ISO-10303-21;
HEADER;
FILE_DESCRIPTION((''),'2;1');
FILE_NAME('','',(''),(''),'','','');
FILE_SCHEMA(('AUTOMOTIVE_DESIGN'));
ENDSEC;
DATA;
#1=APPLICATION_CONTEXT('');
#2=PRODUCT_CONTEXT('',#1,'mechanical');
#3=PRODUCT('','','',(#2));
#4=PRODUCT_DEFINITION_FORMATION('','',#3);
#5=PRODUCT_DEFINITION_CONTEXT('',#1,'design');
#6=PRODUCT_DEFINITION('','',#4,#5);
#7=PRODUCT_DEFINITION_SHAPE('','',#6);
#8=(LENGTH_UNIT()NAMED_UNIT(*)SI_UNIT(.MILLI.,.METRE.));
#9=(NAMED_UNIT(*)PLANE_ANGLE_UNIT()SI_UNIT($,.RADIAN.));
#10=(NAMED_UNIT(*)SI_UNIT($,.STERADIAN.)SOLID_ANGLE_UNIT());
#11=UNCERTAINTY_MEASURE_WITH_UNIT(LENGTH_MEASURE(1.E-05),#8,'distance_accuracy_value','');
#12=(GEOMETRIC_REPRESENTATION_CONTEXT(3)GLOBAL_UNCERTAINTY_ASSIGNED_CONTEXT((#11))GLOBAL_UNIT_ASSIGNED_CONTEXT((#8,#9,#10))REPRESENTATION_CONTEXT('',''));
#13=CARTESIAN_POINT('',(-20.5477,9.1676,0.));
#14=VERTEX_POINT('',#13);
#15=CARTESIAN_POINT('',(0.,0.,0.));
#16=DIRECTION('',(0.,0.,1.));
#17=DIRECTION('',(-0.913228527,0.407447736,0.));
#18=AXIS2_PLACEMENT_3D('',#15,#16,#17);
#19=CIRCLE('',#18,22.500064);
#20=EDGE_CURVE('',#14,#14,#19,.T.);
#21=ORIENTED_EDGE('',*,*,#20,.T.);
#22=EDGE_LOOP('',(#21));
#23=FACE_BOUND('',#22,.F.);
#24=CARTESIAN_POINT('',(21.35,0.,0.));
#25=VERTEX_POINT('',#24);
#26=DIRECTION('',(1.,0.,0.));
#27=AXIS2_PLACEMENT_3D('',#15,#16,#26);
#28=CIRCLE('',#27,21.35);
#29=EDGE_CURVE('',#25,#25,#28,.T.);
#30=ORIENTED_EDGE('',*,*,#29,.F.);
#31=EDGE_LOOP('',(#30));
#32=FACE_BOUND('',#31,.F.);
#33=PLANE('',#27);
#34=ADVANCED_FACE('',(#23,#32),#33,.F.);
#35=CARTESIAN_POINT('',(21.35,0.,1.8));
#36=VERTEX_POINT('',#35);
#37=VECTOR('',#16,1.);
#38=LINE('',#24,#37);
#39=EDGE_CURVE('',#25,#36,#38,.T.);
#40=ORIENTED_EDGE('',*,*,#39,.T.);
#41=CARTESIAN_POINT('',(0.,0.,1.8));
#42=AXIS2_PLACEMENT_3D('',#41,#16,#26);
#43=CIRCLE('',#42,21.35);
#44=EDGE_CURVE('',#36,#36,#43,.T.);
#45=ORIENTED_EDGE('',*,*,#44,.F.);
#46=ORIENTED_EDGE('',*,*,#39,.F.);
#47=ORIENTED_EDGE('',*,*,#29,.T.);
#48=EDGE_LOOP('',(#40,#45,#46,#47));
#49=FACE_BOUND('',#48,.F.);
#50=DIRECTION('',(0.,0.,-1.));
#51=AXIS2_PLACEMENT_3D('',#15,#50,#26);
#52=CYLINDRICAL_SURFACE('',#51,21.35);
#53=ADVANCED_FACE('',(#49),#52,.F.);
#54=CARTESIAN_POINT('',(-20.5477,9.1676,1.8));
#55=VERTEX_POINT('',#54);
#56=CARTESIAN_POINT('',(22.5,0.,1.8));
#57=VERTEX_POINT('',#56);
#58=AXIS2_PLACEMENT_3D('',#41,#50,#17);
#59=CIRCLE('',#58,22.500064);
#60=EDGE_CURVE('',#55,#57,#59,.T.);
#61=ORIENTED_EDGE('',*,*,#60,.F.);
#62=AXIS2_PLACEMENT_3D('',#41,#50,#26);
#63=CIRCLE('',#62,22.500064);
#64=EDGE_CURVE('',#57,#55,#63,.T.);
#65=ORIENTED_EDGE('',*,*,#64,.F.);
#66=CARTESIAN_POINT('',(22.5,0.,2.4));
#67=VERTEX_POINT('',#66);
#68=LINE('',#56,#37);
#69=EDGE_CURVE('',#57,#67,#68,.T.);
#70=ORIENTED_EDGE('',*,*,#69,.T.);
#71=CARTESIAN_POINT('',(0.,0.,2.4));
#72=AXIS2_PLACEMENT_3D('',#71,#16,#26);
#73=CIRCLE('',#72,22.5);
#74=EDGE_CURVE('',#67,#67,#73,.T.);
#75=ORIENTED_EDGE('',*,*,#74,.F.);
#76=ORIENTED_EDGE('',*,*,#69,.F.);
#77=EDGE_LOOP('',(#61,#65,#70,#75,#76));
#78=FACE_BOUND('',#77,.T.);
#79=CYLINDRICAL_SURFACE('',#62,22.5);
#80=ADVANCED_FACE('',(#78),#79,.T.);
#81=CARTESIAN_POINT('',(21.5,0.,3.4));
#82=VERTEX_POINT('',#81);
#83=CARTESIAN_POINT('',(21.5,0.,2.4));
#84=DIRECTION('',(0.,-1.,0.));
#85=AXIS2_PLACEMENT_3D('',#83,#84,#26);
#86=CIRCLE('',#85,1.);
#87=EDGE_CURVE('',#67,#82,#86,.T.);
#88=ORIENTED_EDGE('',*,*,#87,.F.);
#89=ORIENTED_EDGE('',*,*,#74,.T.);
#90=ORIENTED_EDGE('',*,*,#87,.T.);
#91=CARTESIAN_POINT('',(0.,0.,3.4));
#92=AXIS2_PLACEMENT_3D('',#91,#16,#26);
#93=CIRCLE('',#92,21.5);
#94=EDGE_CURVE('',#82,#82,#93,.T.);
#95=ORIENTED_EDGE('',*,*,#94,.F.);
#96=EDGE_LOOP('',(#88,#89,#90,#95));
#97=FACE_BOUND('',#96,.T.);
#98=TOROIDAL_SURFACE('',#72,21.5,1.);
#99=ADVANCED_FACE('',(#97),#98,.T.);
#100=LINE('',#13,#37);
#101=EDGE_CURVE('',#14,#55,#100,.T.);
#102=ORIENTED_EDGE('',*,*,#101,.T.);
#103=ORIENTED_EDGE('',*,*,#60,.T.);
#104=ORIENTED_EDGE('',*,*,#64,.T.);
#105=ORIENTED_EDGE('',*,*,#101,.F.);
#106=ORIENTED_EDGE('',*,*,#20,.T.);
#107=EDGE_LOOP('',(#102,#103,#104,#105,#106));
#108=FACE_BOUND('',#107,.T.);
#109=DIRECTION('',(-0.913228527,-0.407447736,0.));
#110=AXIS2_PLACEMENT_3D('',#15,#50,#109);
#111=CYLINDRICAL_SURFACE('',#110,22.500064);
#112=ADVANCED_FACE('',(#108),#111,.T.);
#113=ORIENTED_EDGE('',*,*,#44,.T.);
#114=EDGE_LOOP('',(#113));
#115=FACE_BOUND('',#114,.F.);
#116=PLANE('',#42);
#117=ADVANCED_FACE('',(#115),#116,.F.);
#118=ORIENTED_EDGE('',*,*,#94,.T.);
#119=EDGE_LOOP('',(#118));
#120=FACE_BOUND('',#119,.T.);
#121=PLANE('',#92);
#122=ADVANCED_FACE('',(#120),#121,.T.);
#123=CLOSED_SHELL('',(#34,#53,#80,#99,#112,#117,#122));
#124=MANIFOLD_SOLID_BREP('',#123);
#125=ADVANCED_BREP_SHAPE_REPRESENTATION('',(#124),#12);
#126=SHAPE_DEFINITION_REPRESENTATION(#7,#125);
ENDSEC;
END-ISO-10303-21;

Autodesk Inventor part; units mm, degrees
ref_plane "YZ Plane" through (0, 0, 0) normal (1, 0, 0) x (0, 1, 0)
ref_plane "XZ Plane" through (0, 0, 0) normal (0, 1, 0) x (-1, 0, 0)
ref_plane "Arbeitsebene1" through (0, 0, 0) normal (0, 0, 1) x (1, 0, 0)
sketch "Skizze1" plane through (0, 0, 0) normal (0, 0, 1) x (1, 0, 0)
  arc A0 (20.5477, -9.1676) -> (20.5477, 9.1676) centre (0, 0) ccw projected
  arc A1 (20.5477, 9.1676) -> (-20.5477, 9.1676) centre (0, 0) ccw projected
  arc A2 (-20.5477, 9.1676) -> (-20.5477, -9.1676) centre (0, 0) ccw projected
  arc A3 (-20.5477, -9.1676) -> (20.5477, -9.1676) centre (0, 0) ccw projected
  circle A4 centre (0, 0) radius 21.25 projected
  circle A5 centre (0, 0) radius 21.35
  dimension "d0" = 0.1
ref_plane "Arbeitsebene2" through (-21.25, -21.25, 1.8) normal (0, 0, 1) x (1, 0, 0)
extrude "Extrusion1" add sketch "Skizze1" along normal up to surface (1.8 mm away) contours A3 A2 A1 A0
sketch "Skizze2" plane through (0, 0, 1.8) normal (0, 0, 1) x (1, 0, 0)
  circle A0 centre (0, 0) radius 22.5
extrude "Extrusion2" add sketch "Skizze2" along normal blind 1.6
fillet "Rundung1" radius 1 1 edges at (-22.5, 0, 3.4)
properties part number "totmannschalter_deckel"
